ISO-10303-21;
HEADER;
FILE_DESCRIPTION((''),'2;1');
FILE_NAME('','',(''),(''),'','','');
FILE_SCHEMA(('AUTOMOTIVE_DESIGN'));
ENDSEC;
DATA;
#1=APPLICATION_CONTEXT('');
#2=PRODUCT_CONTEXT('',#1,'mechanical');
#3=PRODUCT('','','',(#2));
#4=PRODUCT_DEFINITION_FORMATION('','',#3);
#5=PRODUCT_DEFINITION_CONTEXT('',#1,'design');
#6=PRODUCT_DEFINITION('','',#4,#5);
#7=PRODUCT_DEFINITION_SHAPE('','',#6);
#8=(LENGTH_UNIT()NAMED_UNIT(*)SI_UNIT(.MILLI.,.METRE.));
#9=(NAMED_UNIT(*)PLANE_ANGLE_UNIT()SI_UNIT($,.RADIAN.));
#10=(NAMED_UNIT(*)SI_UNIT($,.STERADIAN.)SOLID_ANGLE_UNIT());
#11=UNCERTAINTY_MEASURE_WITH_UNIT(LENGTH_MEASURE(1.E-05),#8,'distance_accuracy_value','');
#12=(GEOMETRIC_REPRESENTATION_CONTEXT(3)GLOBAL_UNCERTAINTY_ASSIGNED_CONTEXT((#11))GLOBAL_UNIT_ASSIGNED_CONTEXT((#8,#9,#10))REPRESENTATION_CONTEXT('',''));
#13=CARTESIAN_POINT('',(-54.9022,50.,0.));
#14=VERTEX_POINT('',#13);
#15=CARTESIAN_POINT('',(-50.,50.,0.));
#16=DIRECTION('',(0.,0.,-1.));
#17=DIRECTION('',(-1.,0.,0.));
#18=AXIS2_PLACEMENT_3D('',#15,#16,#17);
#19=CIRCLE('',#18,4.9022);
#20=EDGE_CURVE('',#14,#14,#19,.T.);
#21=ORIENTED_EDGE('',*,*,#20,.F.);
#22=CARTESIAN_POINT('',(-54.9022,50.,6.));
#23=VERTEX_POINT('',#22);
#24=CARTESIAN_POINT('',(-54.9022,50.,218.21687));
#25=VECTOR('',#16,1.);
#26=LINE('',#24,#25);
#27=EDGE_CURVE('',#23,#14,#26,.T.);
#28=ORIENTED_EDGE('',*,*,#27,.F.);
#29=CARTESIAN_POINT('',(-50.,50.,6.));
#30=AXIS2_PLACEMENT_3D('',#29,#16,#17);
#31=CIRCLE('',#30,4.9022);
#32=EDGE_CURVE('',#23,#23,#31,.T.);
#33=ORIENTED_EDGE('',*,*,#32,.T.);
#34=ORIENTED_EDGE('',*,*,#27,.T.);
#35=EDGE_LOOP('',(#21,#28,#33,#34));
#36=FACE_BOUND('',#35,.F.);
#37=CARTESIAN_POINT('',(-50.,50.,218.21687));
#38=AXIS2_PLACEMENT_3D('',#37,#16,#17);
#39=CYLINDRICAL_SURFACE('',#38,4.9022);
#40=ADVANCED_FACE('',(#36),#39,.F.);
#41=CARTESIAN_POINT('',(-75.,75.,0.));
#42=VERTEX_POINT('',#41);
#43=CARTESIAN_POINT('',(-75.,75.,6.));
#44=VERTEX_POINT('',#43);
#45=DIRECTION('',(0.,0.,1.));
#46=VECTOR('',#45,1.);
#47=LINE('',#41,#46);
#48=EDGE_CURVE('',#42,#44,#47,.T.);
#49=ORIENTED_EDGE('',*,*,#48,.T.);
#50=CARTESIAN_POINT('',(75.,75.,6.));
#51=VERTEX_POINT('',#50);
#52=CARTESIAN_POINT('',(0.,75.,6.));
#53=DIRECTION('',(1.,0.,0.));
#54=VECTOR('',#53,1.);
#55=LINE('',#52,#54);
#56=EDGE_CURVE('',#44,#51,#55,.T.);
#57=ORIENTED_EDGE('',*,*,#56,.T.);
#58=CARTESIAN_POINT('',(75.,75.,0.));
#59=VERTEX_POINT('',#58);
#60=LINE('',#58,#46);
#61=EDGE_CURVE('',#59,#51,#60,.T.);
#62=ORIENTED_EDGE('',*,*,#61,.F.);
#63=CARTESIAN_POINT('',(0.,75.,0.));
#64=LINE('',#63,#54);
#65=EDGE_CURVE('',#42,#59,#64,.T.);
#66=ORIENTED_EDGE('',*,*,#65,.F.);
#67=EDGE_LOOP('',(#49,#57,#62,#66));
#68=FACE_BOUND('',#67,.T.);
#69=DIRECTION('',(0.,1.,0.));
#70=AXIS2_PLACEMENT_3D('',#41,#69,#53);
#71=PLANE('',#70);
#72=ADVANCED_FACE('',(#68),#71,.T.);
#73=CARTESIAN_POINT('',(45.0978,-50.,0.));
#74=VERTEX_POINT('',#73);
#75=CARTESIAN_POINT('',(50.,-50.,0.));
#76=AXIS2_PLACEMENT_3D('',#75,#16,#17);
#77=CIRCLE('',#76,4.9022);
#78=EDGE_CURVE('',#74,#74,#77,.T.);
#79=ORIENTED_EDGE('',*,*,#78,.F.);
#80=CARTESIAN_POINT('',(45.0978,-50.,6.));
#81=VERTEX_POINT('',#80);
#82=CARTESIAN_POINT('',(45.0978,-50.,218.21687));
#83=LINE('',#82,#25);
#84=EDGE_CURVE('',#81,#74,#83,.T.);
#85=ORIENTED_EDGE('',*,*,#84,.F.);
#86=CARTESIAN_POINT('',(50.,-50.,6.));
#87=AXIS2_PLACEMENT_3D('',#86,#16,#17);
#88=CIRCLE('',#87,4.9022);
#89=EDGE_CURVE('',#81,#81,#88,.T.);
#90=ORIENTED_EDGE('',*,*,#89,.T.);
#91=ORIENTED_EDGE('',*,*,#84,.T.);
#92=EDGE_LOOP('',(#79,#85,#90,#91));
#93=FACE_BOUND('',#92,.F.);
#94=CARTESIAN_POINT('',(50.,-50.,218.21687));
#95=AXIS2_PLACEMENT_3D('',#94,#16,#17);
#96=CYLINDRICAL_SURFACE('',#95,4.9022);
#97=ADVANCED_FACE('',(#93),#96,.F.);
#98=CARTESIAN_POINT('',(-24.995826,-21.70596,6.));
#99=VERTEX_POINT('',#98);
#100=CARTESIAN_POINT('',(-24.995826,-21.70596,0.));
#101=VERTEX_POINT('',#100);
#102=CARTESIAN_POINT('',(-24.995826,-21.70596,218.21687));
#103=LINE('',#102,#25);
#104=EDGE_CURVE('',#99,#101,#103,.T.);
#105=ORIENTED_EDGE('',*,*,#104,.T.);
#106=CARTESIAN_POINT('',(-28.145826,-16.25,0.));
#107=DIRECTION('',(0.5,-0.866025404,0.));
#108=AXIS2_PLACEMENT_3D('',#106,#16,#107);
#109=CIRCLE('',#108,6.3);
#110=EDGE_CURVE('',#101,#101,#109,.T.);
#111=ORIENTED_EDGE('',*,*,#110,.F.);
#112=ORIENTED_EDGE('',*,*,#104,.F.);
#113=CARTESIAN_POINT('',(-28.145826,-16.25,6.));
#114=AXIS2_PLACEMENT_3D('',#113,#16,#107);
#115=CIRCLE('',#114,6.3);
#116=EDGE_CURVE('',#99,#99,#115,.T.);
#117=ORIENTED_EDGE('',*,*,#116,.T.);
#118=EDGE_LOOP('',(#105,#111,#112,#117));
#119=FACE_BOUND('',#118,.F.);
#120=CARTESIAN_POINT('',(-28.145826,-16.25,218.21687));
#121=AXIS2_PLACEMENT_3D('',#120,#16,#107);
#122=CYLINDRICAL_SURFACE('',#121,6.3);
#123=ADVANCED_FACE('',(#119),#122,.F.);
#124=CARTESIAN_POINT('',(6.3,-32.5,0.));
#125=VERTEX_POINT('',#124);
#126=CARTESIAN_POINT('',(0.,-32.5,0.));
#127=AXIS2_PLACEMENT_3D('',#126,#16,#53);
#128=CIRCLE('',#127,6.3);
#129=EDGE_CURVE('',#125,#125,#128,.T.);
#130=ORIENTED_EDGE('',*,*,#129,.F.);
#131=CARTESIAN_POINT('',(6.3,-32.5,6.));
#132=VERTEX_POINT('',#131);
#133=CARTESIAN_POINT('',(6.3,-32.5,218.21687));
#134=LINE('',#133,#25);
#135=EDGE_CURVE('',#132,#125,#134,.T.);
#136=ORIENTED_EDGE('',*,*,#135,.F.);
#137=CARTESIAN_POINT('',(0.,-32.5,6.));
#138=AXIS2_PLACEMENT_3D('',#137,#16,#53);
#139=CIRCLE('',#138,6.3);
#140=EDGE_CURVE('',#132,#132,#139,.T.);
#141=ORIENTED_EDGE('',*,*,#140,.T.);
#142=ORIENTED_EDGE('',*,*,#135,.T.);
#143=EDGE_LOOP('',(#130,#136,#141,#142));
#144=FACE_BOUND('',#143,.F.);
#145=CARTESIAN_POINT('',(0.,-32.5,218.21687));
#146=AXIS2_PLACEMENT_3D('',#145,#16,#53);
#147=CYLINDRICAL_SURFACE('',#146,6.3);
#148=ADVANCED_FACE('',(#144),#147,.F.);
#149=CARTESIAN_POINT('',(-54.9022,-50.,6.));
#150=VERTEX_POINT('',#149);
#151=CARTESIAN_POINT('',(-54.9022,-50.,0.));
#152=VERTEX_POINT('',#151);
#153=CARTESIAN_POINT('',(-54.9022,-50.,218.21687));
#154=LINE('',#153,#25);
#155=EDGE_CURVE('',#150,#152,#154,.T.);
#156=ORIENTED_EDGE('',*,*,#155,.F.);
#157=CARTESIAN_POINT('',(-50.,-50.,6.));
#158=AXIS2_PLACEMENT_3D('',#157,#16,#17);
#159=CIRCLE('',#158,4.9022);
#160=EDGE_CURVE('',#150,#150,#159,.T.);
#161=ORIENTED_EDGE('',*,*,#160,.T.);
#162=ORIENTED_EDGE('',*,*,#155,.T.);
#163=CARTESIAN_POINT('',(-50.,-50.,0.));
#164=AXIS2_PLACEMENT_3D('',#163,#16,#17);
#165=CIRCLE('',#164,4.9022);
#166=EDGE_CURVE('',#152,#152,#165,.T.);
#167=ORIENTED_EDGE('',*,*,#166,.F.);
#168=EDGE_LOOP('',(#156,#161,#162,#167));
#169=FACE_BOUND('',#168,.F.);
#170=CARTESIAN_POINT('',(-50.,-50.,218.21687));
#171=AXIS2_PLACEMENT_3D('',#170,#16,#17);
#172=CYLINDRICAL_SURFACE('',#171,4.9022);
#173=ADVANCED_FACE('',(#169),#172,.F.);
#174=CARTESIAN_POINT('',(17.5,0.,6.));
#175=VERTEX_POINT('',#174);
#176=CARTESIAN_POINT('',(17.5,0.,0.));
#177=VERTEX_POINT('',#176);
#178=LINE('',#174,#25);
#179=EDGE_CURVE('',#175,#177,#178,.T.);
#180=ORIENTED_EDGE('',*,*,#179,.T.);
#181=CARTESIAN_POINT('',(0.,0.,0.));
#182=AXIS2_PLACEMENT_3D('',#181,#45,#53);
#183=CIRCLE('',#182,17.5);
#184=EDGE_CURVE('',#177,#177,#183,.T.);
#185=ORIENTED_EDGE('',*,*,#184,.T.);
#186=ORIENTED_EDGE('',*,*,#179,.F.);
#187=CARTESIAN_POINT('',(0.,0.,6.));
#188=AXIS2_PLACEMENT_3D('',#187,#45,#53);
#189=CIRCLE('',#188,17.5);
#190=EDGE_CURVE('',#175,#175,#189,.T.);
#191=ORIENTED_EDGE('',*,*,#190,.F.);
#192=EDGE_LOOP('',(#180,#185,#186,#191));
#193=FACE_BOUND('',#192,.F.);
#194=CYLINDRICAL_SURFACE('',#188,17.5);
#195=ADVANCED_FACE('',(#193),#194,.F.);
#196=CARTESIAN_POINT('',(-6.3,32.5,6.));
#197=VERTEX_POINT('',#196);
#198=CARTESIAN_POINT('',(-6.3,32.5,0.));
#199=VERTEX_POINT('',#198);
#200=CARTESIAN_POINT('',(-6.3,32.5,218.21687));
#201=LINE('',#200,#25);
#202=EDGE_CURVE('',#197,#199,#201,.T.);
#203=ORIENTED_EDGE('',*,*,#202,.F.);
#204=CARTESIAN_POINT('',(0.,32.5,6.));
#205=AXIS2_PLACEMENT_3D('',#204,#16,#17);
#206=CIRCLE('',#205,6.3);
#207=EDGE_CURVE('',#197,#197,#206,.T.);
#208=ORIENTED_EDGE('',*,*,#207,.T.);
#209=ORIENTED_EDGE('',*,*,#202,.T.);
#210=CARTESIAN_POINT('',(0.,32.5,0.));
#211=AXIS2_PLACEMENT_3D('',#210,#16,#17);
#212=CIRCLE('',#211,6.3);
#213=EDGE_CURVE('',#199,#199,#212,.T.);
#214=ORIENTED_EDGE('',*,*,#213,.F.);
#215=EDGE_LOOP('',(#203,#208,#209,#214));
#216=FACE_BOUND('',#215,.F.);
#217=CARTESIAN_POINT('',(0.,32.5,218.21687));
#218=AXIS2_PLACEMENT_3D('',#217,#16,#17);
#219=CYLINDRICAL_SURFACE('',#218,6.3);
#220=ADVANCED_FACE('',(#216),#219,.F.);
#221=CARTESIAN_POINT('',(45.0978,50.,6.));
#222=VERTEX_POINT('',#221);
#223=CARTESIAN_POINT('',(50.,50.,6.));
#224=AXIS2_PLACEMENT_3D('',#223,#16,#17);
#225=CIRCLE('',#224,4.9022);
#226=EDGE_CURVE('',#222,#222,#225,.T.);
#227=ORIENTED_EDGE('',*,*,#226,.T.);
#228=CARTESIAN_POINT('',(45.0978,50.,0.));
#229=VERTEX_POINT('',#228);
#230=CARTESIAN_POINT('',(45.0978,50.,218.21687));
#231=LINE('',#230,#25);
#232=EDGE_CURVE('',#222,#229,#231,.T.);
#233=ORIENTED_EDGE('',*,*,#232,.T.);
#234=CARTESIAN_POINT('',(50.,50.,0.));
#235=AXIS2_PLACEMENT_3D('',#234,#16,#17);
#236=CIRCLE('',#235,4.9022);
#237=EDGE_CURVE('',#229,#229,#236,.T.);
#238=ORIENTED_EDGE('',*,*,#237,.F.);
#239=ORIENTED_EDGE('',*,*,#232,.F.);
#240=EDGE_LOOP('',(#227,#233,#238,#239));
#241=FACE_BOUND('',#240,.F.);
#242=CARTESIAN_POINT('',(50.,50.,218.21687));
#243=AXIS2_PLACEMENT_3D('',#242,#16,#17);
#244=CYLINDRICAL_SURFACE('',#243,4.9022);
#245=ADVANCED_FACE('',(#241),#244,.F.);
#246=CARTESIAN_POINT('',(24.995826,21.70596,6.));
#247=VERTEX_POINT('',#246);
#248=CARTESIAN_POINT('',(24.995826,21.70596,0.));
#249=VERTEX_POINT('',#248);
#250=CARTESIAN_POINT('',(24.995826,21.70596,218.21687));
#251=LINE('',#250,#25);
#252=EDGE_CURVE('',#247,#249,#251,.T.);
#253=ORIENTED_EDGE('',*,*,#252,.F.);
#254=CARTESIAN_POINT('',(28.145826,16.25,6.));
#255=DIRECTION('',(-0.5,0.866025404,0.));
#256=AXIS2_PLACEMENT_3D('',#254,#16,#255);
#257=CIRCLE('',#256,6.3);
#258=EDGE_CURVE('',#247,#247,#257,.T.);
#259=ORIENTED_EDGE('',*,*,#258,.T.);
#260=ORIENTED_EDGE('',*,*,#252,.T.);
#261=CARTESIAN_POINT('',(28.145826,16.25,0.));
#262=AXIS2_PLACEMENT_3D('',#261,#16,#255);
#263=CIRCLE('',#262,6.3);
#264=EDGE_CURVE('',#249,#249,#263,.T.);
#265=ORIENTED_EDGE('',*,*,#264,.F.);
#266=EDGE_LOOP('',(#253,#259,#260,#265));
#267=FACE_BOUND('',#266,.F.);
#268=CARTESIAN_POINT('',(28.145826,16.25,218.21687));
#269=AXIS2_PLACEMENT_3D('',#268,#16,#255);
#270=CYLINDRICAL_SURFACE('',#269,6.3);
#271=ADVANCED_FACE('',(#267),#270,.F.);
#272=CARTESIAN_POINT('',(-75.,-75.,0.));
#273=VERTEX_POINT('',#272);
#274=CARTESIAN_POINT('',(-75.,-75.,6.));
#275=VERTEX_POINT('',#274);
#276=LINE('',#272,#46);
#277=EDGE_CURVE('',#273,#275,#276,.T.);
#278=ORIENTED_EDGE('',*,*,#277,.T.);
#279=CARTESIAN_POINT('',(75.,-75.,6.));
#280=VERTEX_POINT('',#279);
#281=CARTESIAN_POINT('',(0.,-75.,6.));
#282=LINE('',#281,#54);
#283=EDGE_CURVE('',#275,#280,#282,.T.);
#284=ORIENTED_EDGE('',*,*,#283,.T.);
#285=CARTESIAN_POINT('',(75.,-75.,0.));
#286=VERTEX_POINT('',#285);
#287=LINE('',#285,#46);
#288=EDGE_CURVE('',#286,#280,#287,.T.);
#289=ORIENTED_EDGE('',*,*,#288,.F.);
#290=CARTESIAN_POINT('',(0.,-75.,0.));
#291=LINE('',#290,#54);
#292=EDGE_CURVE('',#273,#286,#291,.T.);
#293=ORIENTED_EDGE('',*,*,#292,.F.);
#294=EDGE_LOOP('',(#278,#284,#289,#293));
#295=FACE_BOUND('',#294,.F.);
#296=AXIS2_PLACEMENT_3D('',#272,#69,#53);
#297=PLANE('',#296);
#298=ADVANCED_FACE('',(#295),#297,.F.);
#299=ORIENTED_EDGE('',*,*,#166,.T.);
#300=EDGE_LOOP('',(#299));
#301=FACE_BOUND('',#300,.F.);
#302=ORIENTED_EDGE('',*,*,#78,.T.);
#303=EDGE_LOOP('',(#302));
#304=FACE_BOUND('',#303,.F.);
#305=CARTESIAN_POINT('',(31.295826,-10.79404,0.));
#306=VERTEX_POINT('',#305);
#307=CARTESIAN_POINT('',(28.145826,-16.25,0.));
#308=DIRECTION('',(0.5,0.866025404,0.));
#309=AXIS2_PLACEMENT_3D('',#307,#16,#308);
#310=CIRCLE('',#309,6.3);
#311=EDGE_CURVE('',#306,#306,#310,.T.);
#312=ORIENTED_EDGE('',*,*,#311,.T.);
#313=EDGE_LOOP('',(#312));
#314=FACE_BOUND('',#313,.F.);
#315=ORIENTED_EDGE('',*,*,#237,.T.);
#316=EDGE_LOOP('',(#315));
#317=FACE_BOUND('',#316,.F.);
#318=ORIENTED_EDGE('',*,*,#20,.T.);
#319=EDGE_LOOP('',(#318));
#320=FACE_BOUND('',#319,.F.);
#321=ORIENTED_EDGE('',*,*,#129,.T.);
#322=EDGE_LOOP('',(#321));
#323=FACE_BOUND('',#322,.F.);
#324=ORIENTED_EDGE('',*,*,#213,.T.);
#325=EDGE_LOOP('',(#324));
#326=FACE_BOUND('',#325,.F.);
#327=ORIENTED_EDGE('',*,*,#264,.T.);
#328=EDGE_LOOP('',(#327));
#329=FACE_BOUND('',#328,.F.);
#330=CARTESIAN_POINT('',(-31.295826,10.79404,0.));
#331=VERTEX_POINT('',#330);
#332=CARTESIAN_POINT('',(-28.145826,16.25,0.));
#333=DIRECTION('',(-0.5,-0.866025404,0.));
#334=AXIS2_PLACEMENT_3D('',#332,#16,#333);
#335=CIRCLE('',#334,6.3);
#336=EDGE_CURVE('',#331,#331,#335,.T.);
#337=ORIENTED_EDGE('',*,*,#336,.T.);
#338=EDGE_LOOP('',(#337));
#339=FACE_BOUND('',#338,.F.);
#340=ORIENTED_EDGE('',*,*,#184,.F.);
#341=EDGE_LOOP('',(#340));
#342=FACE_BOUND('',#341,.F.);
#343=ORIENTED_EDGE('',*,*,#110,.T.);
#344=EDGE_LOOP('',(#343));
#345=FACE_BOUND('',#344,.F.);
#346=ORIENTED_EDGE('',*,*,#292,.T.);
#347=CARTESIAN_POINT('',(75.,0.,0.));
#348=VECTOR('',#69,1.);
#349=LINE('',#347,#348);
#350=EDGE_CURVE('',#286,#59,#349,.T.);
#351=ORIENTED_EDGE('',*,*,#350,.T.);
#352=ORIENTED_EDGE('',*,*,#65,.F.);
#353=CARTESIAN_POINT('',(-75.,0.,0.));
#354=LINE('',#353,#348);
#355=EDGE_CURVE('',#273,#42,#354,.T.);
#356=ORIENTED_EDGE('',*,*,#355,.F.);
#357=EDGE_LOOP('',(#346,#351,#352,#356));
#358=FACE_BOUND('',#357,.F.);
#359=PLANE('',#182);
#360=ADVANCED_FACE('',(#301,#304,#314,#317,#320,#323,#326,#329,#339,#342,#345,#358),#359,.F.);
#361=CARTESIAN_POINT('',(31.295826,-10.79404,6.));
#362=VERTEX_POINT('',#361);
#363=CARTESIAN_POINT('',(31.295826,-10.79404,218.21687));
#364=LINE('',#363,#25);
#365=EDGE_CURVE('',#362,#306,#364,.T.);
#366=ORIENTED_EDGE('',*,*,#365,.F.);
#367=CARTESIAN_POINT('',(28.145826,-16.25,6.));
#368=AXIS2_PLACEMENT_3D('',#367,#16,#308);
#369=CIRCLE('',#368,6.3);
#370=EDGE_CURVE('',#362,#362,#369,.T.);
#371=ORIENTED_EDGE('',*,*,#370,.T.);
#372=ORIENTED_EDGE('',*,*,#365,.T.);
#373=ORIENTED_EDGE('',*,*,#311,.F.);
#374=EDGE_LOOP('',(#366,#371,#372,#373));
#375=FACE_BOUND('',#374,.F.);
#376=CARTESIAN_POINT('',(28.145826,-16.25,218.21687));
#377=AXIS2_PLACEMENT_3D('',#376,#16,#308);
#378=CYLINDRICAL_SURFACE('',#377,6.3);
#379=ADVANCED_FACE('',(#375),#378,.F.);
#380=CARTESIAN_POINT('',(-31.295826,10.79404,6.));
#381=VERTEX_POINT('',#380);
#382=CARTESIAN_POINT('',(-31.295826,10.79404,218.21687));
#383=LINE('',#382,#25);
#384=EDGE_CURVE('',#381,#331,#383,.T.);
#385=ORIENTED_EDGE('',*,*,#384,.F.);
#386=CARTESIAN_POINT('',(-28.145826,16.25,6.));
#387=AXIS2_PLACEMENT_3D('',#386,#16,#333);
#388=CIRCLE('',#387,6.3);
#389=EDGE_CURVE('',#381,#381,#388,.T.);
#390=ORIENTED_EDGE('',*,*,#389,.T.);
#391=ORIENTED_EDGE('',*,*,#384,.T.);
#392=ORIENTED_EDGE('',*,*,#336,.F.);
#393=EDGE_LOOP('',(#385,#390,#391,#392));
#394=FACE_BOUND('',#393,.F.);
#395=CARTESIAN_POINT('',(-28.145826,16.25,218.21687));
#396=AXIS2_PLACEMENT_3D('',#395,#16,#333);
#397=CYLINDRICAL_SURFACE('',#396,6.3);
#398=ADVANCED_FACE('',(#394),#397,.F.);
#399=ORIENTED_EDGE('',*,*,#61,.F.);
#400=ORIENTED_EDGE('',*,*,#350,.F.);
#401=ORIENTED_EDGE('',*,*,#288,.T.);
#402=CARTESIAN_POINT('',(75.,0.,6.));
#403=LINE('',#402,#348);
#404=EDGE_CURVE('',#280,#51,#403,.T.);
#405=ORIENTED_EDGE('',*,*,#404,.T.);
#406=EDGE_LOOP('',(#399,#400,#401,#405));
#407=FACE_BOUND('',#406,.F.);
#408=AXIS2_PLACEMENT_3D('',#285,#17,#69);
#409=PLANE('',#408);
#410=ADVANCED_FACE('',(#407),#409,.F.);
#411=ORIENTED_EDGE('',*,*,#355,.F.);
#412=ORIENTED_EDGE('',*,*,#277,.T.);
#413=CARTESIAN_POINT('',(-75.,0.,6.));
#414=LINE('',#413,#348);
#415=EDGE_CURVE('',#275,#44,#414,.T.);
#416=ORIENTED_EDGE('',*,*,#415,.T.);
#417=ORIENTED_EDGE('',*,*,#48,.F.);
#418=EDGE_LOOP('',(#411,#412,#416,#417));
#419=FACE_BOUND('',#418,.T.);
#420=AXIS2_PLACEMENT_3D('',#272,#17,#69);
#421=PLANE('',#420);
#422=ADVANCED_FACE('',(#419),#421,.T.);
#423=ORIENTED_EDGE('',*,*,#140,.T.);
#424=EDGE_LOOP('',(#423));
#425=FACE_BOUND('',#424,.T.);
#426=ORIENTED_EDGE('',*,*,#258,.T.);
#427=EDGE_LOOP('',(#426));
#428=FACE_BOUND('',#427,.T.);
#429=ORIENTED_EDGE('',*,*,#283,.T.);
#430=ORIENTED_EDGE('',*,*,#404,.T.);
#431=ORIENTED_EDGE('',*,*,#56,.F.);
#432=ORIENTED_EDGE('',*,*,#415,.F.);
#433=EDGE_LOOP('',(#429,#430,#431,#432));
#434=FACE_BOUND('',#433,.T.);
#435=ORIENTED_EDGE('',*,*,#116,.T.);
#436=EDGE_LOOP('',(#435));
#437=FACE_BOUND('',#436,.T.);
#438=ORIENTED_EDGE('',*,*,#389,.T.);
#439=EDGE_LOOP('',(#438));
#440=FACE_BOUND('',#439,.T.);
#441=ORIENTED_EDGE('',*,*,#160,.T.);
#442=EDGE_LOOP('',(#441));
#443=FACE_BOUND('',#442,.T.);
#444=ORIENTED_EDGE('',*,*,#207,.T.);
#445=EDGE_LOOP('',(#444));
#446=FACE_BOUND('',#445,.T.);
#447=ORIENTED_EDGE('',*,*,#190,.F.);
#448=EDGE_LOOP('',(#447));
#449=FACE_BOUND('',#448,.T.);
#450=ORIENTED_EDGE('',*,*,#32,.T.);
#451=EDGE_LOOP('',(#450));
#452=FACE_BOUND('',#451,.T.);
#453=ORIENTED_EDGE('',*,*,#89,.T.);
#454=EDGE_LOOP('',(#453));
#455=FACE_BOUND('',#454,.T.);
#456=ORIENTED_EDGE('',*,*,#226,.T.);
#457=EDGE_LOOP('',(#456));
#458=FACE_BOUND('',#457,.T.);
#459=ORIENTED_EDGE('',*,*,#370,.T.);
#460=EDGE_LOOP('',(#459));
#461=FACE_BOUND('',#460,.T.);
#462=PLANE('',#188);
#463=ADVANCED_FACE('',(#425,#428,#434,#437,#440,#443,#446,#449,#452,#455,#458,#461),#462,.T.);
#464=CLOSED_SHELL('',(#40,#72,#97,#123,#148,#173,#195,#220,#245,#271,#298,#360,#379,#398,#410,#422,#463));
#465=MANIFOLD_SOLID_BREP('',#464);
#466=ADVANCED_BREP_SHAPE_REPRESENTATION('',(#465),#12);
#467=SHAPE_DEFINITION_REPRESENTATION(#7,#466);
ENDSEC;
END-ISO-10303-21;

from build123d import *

# Parameters (mm, degrees)
F0_R            = 41.5
F1_DEPTH        = 6
F2_W            = 150
F2_H            = 150
F3_DEPTH        = 6
F5_R            = 17.5
F6_DEPTH        = 6.001
F7_D            = 12.6
F7_COPIES_COUNT = 6
F9_D            = 9.8044


# Not quite as in the source:
# - a pattern or mirror of a feature is missing from the dataset's text; its kind, count and spacing are read off the source's solid


with BuildPart() as f1:
    # F0 (on Top) → F1 (new body)
    with BuildSketch(Plane.XY):
        Circle(F0_R)
    extrude(amount=F1_DEPTH)

    # F2 (on Top) → F3 (join)
    with BuildSketch(Plane.XY):
        Rectangle(F2_W, F2_H)
    extrude(amount=F3_DEPTH)

    # F5 (on face) → F6 (cut, through all)
    with BuildSketch(Plane.XY.offset(6)):
        Circle(F5_R)
    extrude(amount=-F6_DEPTH, mode=Mode.SUBTRACT)

    # F7 (through all)
    with Locations(Plane.XY.offset(6)):
        with Locations((0, 32.5)):
            f7 = Hole(F7_D / 2)

    # F7_copies: F7 ×6 about axis
    f7_copies_axis = Axis((0, 0, 0), (0, 0, 1))
    for i in range(1, F7_COPIES_COUNT):
        add(f7.rotate(f7_copies_axis, i * 360 / F7_COPIES_COUNT), mode=Mode.SUBTRACT)

    # F9 (through all)
    with Locations(Plane.XY.offset(6)):
        with Locations((-50, 50), (50, 50), (50, -50), (-50, -50)):
            Hole(F9_D / 2)


solid = f1.part
